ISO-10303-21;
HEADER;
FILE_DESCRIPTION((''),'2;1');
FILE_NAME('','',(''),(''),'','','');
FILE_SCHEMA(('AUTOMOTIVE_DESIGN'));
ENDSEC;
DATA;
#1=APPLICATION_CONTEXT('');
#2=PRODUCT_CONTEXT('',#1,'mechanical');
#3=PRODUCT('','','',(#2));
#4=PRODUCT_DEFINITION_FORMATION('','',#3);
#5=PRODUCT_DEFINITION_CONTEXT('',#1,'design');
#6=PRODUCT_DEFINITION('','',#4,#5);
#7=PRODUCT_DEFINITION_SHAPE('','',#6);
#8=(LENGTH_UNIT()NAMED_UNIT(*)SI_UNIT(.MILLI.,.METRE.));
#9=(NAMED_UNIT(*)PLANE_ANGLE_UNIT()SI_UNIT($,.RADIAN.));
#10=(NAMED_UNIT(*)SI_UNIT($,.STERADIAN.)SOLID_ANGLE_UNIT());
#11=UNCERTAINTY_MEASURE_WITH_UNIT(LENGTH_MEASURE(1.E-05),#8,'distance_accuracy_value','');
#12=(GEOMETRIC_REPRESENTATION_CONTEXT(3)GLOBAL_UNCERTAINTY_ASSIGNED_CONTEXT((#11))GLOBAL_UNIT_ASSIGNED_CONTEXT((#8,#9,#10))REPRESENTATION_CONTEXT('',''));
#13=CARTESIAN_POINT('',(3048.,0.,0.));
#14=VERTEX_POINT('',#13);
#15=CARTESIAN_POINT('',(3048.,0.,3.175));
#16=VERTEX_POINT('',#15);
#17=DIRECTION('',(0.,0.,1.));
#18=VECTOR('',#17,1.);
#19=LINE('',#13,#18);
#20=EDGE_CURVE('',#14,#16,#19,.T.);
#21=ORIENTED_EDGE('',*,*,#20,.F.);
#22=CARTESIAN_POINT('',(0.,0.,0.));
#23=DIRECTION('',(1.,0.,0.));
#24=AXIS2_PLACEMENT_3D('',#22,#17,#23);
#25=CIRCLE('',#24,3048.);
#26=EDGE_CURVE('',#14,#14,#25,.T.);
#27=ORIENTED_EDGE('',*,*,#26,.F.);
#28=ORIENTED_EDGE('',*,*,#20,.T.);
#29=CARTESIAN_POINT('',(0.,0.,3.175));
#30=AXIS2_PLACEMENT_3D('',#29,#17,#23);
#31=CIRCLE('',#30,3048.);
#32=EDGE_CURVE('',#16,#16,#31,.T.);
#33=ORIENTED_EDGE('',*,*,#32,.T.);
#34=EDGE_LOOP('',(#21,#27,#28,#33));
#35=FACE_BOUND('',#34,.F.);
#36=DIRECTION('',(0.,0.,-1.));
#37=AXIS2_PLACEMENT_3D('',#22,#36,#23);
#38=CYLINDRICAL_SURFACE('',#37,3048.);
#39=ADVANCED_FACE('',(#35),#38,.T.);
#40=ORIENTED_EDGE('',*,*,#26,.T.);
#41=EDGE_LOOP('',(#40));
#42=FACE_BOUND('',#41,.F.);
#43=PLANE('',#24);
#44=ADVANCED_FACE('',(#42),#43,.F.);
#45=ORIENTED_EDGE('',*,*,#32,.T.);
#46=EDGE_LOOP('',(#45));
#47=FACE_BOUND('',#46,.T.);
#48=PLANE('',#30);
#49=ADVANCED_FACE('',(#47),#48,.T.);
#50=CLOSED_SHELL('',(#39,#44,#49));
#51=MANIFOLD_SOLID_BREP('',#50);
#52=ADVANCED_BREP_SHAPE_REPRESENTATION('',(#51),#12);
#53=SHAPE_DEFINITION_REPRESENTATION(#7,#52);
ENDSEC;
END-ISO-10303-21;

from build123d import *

# Parameters (mm, degrees)
F0_R     = 3048
F1_DEPTH = 3.175


# Not quite as in the source:
# - a length typed as a fraction of an inch, garbled in the dataset ("3 / 203.2 mm" for 3/8 in), is restored


with BuildPart() as f1:
    # F0 (on Top) → F1 (new body)
    with BuildSketch(Plane.XY):
        Circle(F0_R)
    extrude(amount=F1_DEPTH)


solid = f1.part
